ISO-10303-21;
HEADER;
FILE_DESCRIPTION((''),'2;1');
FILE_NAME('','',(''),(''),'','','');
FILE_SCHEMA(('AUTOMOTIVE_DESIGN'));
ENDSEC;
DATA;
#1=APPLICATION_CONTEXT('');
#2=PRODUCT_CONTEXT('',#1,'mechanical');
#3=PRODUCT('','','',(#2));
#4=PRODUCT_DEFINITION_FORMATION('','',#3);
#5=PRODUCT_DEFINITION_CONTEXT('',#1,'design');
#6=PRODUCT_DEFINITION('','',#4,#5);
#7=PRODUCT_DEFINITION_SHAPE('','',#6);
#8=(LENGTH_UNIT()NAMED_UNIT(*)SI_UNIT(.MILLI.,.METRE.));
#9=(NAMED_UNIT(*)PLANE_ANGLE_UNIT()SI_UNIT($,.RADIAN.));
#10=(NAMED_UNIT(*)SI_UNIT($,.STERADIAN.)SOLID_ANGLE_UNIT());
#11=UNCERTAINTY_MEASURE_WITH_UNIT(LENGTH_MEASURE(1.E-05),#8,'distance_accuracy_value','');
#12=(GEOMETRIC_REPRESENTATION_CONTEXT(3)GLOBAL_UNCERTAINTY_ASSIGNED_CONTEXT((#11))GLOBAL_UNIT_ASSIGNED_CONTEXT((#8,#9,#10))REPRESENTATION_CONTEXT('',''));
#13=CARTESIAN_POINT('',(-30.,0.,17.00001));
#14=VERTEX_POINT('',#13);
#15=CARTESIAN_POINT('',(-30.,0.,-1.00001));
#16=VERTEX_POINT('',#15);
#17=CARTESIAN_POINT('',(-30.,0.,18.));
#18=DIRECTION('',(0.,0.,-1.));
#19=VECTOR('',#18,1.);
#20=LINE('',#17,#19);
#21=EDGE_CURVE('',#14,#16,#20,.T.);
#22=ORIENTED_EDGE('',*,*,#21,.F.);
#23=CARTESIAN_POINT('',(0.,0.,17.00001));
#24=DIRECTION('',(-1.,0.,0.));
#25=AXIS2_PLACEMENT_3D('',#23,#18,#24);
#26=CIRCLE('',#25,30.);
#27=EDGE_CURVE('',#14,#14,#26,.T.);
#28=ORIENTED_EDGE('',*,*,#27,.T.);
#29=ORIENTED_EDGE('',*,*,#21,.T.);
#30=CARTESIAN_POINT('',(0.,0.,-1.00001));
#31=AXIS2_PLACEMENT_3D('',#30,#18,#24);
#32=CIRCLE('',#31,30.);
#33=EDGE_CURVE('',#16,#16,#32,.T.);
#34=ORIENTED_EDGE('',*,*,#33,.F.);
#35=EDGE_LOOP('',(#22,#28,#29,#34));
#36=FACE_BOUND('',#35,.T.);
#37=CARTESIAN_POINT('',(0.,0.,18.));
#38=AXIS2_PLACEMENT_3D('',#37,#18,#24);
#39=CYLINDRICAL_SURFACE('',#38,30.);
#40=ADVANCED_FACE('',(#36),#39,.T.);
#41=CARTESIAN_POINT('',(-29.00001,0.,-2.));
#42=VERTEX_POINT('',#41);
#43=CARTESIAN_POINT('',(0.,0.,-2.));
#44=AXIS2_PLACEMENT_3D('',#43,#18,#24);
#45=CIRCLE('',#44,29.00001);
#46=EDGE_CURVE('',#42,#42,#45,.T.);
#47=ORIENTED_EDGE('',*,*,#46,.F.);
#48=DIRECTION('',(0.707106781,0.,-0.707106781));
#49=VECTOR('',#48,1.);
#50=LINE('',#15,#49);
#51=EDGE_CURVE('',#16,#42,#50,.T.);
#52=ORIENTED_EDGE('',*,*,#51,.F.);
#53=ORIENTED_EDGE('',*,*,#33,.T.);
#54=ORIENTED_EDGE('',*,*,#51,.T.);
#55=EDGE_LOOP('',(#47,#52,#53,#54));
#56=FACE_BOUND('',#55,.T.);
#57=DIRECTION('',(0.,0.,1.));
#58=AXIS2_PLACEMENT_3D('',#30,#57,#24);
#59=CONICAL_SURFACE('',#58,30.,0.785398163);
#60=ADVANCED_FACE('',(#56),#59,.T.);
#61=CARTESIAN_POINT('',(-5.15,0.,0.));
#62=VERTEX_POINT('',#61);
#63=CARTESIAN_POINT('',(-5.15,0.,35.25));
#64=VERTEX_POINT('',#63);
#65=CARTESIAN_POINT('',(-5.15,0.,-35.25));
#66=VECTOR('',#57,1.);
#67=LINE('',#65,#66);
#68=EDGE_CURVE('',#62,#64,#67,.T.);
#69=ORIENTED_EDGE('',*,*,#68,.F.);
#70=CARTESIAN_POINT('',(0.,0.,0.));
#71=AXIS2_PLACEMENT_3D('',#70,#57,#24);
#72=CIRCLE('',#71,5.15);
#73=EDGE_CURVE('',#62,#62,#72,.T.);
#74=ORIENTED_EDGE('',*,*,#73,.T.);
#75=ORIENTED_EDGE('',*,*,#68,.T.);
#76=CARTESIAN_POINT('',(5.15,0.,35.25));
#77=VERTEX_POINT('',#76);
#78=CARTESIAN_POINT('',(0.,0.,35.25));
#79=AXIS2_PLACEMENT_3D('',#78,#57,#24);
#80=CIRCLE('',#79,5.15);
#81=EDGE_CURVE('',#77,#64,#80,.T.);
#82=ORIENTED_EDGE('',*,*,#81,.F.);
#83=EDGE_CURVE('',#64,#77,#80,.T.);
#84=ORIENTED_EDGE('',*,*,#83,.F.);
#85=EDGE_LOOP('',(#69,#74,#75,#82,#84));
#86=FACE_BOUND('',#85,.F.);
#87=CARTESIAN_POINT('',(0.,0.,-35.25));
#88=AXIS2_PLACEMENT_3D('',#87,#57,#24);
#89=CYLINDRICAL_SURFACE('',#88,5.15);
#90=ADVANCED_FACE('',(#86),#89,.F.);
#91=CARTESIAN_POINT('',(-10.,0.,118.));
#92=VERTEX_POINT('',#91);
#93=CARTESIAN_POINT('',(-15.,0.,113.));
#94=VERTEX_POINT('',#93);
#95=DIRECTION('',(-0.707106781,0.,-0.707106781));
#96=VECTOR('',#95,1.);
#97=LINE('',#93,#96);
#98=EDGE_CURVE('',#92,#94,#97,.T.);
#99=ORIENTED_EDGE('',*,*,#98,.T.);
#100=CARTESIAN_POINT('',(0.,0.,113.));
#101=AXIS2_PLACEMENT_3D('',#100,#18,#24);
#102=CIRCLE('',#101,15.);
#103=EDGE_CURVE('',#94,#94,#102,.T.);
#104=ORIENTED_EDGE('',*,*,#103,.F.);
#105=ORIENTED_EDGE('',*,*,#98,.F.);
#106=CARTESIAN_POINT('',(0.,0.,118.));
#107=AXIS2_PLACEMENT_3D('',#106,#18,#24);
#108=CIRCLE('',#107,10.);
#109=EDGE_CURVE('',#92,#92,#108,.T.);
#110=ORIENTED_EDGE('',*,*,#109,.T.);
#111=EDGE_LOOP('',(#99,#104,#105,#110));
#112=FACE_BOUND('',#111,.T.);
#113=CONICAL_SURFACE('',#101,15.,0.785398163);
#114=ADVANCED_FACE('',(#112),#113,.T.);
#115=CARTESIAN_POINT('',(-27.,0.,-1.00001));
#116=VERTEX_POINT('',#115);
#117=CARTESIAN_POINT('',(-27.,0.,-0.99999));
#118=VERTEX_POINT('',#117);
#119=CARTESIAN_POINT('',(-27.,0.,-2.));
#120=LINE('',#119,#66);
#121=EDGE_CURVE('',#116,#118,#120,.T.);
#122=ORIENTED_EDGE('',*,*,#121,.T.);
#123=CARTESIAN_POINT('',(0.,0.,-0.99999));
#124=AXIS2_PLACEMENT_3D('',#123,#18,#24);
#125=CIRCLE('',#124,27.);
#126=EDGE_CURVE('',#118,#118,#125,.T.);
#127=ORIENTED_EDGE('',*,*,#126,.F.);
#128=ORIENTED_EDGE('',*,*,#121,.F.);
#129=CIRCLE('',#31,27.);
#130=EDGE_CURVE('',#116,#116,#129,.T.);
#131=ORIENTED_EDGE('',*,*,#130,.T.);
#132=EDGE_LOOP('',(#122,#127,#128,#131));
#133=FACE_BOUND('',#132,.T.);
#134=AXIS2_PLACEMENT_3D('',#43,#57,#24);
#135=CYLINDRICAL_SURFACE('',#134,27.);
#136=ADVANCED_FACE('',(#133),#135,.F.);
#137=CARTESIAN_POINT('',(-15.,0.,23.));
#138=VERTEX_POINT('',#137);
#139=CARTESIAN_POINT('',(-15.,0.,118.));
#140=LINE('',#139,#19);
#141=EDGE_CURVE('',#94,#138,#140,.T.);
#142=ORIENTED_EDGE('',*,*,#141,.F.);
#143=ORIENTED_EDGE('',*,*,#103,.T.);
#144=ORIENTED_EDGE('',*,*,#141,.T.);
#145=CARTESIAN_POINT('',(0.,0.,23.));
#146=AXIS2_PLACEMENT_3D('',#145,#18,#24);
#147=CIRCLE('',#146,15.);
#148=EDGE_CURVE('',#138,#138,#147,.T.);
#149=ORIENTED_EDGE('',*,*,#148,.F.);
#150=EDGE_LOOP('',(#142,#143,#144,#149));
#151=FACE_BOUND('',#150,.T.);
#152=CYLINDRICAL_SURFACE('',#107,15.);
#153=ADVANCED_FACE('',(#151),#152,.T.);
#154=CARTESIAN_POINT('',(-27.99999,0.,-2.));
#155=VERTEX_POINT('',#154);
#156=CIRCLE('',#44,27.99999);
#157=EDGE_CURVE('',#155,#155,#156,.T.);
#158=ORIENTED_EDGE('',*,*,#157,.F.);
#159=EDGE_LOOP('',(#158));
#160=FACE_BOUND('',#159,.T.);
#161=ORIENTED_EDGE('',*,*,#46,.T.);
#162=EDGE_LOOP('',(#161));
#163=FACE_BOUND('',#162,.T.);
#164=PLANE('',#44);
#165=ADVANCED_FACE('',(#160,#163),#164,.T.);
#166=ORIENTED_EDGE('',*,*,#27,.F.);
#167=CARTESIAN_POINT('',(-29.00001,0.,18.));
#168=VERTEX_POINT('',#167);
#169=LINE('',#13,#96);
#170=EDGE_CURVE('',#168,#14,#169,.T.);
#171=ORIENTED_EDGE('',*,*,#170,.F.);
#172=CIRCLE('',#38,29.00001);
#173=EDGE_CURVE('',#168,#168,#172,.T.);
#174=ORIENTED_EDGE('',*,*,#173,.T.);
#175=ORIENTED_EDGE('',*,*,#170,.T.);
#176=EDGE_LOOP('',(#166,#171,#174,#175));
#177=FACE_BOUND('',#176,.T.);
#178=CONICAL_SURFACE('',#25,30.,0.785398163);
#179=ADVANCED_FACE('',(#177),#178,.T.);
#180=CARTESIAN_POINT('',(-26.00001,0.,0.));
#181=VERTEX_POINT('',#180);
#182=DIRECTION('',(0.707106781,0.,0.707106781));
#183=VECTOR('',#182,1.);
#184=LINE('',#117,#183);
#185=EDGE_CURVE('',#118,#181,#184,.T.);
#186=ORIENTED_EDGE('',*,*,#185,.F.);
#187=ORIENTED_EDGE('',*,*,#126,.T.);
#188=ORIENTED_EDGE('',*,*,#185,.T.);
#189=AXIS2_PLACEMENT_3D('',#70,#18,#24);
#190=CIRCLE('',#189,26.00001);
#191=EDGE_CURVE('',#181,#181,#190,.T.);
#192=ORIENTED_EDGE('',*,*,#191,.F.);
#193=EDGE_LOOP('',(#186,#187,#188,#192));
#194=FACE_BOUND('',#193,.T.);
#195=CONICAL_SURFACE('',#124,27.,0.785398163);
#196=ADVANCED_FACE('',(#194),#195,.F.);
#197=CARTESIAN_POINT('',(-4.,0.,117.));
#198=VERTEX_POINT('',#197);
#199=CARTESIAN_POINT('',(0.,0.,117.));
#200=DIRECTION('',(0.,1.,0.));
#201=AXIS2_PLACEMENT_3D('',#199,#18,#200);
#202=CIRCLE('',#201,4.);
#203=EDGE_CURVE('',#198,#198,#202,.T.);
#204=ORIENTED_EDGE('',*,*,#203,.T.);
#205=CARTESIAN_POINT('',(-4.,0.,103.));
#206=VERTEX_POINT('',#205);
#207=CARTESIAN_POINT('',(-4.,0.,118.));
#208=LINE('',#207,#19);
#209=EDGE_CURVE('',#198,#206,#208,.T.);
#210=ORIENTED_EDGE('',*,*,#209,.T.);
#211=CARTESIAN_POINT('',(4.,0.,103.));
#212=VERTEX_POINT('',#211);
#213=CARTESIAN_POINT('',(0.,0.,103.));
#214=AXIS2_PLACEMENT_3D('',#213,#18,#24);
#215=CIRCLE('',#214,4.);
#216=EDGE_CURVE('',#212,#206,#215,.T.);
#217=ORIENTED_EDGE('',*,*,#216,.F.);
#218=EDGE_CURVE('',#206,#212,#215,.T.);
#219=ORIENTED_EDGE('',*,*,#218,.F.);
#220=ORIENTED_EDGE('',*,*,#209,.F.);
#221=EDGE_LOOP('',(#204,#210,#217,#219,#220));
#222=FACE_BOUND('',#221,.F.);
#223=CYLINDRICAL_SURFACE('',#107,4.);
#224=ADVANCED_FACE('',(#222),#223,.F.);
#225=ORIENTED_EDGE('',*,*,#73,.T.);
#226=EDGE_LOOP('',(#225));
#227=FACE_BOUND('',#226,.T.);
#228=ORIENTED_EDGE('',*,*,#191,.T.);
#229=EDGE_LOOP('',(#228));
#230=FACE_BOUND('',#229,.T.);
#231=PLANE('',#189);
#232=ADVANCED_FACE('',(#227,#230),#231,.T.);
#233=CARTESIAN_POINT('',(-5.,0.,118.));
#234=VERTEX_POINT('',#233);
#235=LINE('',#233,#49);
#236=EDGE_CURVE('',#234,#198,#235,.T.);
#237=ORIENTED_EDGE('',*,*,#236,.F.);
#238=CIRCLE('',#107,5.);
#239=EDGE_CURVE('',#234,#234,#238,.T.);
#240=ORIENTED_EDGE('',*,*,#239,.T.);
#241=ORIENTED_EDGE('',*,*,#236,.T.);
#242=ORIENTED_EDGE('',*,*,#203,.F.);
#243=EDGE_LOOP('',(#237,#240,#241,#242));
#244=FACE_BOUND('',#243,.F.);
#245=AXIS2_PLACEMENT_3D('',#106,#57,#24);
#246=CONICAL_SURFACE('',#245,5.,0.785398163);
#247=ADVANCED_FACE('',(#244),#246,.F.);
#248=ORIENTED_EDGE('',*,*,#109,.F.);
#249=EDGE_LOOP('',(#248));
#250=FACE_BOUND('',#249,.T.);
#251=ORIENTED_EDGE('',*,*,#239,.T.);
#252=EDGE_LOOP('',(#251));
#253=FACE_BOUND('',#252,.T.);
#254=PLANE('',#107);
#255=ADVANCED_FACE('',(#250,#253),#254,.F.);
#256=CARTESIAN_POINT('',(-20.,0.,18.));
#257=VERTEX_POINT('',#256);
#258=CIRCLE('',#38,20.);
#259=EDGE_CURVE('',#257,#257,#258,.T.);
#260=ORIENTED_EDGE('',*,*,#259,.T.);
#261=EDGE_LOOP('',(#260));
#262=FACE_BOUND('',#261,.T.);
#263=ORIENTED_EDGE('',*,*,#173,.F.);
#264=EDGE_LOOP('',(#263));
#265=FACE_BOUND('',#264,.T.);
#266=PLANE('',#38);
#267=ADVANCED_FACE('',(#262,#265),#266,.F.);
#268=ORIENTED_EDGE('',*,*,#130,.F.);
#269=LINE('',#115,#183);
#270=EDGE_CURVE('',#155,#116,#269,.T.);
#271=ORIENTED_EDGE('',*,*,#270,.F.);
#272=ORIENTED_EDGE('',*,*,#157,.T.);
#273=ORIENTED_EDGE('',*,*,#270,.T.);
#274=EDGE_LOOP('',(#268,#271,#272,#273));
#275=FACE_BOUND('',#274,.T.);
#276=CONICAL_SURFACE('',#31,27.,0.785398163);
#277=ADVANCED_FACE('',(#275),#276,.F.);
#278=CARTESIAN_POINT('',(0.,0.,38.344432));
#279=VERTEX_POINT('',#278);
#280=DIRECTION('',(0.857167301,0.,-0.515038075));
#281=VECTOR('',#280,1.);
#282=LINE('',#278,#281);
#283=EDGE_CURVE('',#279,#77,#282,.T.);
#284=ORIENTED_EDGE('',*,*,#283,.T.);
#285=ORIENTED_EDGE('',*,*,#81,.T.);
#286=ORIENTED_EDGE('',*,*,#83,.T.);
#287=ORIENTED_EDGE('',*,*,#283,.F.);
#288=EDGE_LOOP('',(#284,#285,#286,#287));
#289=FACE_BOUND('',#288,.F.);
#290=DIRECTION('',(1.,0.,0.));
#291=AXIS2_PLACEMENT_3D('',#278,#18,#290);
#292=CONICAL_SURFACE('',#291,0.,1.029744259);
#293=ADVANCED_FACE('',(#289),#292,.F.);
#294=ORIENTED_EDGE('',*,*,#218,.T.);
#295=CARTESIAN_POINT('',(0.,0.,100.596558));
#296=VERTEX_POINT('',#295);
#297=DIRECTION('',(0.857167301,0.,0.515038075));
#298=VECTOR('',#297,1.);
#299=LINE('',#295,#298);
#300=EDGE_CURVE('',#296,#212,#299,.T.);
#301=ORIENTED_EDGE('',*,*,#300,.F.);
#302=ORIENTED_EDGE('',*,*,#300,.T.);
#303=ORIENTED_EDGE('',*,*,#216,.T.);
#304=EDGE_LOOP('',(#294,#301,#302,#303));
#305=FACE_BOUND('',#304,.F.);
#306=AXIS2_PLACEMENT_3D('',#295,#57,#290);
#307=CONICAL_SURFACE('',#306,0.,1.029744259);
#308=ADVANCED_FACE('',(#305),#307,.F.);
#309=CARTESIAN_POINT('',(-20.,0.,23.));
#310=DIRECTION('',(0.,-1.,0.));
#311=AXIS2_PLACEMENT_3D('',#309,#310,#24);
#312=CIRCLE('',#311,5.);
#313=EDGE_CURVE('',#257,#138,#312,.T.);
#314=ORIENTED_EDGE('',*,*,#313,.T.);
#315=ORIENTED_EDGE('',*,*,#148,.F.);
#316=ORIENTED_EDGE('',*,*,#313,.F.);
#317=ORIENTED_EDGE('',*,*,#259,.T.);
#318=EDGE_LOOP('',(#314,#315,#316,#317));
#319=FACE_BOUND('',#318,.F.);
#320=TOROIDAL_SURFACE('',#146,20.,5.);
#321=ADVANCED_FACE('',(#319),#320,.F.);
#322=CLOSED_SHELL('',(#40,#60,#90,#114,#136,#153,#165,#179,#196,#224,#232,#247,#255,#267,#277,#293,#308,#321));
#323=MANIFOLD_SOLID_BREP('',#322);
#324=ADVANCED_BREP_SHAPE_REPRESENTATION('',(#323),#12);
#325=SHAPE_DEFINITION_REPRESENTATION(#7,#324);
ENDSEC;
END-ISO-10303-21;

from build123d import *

# Parameters (mm, degrees)
F2_SIZE        = 5
F3_SIZE        = 0.99999
F5_R           = 5
F6_D           = 10.3
F6_DEPTH       = 35.25
F6_TIP         = 3.094432188
F8_D           = 8
F8_DEPTH       = 15
F8_CSINK_D     = 10
F8_CSINK_ANGLE = 90
F8_TIP         = 2.4034424761


# Not quite as in the source:
# - a fillet or chamfer is up to 0.001 mm smaller than in the source, because OpenCascade refuses the exact size


with BuildPart() as f1:
    # F0 (on Front) → F1 (revolve)
    with BuildSketch(Plane.XZ):
        Polygon((-27, 0), (0, 0), (0, 118), (-15, 118), (-15, 18), (-30, 18), (-30, -2), (-27, -2), align=None)
    revolve(axis=Axis((0, 0, 59), (0, 0, -1)))

    # F2
    f2_edges = [f1.edges().sort_by_distance(p)[0] for p in [
        (15, 0, 118),
    ]]
    chamfer(f2_edges, length=F2_SIZE)

    # F3 (size 1 in the source; OpenCascade refuses exactly that, so slightly less here)
    f3_edges = [f1.edges().sort_by_distance(p)[0] for p in [
        (30, 0, 18),
        (30, 0, -2),
        (27, 0, -2),
        (27, 0, 0),
        (-27, 0, -1),
    ]]
    chamfer(f3_edges, length=F3_SIZE)

    # F5
    f5_edges = [f1.edges().sort_by_distance(p)[0] for p in [
        (15, 0, 18),
    ]]
    fillet(f5_edges, radius=F5_R)

    # F6
    with Locations(Plane(origin=(0, 0, 0), x_dir=(1, 0, 0), z_dir=(0, 0, -1))):
        with Locations((0, 0)):
            Hole(F6_D / 2, depth=F6_DEPTH)
            with Locations((0, 0, -(F6_DEPTH + F6_TIP / 2))):  # 118° drill point
                Cone(0, F6_D / 2, F6_TIP, mode=Mode.SUBTRACT)

    # F8
    with Locations(Plane.XY.offset(118)):
        with Locations((0, 0)):
            CounterSinkHole(F8_D / 2, F8_CSINK_D / 2, depth=F8_DEPTH, counter_sink_angle=F8_CSINK_ANGLE)
            with Locations((0, 0, -(F8_DEPTH + F8_TIP / 2))):  # 118° drill point
                Cone(0, F8_D / 2, F8_TIP, mode=Mode.SUBTRACT)


solid = f1.part
